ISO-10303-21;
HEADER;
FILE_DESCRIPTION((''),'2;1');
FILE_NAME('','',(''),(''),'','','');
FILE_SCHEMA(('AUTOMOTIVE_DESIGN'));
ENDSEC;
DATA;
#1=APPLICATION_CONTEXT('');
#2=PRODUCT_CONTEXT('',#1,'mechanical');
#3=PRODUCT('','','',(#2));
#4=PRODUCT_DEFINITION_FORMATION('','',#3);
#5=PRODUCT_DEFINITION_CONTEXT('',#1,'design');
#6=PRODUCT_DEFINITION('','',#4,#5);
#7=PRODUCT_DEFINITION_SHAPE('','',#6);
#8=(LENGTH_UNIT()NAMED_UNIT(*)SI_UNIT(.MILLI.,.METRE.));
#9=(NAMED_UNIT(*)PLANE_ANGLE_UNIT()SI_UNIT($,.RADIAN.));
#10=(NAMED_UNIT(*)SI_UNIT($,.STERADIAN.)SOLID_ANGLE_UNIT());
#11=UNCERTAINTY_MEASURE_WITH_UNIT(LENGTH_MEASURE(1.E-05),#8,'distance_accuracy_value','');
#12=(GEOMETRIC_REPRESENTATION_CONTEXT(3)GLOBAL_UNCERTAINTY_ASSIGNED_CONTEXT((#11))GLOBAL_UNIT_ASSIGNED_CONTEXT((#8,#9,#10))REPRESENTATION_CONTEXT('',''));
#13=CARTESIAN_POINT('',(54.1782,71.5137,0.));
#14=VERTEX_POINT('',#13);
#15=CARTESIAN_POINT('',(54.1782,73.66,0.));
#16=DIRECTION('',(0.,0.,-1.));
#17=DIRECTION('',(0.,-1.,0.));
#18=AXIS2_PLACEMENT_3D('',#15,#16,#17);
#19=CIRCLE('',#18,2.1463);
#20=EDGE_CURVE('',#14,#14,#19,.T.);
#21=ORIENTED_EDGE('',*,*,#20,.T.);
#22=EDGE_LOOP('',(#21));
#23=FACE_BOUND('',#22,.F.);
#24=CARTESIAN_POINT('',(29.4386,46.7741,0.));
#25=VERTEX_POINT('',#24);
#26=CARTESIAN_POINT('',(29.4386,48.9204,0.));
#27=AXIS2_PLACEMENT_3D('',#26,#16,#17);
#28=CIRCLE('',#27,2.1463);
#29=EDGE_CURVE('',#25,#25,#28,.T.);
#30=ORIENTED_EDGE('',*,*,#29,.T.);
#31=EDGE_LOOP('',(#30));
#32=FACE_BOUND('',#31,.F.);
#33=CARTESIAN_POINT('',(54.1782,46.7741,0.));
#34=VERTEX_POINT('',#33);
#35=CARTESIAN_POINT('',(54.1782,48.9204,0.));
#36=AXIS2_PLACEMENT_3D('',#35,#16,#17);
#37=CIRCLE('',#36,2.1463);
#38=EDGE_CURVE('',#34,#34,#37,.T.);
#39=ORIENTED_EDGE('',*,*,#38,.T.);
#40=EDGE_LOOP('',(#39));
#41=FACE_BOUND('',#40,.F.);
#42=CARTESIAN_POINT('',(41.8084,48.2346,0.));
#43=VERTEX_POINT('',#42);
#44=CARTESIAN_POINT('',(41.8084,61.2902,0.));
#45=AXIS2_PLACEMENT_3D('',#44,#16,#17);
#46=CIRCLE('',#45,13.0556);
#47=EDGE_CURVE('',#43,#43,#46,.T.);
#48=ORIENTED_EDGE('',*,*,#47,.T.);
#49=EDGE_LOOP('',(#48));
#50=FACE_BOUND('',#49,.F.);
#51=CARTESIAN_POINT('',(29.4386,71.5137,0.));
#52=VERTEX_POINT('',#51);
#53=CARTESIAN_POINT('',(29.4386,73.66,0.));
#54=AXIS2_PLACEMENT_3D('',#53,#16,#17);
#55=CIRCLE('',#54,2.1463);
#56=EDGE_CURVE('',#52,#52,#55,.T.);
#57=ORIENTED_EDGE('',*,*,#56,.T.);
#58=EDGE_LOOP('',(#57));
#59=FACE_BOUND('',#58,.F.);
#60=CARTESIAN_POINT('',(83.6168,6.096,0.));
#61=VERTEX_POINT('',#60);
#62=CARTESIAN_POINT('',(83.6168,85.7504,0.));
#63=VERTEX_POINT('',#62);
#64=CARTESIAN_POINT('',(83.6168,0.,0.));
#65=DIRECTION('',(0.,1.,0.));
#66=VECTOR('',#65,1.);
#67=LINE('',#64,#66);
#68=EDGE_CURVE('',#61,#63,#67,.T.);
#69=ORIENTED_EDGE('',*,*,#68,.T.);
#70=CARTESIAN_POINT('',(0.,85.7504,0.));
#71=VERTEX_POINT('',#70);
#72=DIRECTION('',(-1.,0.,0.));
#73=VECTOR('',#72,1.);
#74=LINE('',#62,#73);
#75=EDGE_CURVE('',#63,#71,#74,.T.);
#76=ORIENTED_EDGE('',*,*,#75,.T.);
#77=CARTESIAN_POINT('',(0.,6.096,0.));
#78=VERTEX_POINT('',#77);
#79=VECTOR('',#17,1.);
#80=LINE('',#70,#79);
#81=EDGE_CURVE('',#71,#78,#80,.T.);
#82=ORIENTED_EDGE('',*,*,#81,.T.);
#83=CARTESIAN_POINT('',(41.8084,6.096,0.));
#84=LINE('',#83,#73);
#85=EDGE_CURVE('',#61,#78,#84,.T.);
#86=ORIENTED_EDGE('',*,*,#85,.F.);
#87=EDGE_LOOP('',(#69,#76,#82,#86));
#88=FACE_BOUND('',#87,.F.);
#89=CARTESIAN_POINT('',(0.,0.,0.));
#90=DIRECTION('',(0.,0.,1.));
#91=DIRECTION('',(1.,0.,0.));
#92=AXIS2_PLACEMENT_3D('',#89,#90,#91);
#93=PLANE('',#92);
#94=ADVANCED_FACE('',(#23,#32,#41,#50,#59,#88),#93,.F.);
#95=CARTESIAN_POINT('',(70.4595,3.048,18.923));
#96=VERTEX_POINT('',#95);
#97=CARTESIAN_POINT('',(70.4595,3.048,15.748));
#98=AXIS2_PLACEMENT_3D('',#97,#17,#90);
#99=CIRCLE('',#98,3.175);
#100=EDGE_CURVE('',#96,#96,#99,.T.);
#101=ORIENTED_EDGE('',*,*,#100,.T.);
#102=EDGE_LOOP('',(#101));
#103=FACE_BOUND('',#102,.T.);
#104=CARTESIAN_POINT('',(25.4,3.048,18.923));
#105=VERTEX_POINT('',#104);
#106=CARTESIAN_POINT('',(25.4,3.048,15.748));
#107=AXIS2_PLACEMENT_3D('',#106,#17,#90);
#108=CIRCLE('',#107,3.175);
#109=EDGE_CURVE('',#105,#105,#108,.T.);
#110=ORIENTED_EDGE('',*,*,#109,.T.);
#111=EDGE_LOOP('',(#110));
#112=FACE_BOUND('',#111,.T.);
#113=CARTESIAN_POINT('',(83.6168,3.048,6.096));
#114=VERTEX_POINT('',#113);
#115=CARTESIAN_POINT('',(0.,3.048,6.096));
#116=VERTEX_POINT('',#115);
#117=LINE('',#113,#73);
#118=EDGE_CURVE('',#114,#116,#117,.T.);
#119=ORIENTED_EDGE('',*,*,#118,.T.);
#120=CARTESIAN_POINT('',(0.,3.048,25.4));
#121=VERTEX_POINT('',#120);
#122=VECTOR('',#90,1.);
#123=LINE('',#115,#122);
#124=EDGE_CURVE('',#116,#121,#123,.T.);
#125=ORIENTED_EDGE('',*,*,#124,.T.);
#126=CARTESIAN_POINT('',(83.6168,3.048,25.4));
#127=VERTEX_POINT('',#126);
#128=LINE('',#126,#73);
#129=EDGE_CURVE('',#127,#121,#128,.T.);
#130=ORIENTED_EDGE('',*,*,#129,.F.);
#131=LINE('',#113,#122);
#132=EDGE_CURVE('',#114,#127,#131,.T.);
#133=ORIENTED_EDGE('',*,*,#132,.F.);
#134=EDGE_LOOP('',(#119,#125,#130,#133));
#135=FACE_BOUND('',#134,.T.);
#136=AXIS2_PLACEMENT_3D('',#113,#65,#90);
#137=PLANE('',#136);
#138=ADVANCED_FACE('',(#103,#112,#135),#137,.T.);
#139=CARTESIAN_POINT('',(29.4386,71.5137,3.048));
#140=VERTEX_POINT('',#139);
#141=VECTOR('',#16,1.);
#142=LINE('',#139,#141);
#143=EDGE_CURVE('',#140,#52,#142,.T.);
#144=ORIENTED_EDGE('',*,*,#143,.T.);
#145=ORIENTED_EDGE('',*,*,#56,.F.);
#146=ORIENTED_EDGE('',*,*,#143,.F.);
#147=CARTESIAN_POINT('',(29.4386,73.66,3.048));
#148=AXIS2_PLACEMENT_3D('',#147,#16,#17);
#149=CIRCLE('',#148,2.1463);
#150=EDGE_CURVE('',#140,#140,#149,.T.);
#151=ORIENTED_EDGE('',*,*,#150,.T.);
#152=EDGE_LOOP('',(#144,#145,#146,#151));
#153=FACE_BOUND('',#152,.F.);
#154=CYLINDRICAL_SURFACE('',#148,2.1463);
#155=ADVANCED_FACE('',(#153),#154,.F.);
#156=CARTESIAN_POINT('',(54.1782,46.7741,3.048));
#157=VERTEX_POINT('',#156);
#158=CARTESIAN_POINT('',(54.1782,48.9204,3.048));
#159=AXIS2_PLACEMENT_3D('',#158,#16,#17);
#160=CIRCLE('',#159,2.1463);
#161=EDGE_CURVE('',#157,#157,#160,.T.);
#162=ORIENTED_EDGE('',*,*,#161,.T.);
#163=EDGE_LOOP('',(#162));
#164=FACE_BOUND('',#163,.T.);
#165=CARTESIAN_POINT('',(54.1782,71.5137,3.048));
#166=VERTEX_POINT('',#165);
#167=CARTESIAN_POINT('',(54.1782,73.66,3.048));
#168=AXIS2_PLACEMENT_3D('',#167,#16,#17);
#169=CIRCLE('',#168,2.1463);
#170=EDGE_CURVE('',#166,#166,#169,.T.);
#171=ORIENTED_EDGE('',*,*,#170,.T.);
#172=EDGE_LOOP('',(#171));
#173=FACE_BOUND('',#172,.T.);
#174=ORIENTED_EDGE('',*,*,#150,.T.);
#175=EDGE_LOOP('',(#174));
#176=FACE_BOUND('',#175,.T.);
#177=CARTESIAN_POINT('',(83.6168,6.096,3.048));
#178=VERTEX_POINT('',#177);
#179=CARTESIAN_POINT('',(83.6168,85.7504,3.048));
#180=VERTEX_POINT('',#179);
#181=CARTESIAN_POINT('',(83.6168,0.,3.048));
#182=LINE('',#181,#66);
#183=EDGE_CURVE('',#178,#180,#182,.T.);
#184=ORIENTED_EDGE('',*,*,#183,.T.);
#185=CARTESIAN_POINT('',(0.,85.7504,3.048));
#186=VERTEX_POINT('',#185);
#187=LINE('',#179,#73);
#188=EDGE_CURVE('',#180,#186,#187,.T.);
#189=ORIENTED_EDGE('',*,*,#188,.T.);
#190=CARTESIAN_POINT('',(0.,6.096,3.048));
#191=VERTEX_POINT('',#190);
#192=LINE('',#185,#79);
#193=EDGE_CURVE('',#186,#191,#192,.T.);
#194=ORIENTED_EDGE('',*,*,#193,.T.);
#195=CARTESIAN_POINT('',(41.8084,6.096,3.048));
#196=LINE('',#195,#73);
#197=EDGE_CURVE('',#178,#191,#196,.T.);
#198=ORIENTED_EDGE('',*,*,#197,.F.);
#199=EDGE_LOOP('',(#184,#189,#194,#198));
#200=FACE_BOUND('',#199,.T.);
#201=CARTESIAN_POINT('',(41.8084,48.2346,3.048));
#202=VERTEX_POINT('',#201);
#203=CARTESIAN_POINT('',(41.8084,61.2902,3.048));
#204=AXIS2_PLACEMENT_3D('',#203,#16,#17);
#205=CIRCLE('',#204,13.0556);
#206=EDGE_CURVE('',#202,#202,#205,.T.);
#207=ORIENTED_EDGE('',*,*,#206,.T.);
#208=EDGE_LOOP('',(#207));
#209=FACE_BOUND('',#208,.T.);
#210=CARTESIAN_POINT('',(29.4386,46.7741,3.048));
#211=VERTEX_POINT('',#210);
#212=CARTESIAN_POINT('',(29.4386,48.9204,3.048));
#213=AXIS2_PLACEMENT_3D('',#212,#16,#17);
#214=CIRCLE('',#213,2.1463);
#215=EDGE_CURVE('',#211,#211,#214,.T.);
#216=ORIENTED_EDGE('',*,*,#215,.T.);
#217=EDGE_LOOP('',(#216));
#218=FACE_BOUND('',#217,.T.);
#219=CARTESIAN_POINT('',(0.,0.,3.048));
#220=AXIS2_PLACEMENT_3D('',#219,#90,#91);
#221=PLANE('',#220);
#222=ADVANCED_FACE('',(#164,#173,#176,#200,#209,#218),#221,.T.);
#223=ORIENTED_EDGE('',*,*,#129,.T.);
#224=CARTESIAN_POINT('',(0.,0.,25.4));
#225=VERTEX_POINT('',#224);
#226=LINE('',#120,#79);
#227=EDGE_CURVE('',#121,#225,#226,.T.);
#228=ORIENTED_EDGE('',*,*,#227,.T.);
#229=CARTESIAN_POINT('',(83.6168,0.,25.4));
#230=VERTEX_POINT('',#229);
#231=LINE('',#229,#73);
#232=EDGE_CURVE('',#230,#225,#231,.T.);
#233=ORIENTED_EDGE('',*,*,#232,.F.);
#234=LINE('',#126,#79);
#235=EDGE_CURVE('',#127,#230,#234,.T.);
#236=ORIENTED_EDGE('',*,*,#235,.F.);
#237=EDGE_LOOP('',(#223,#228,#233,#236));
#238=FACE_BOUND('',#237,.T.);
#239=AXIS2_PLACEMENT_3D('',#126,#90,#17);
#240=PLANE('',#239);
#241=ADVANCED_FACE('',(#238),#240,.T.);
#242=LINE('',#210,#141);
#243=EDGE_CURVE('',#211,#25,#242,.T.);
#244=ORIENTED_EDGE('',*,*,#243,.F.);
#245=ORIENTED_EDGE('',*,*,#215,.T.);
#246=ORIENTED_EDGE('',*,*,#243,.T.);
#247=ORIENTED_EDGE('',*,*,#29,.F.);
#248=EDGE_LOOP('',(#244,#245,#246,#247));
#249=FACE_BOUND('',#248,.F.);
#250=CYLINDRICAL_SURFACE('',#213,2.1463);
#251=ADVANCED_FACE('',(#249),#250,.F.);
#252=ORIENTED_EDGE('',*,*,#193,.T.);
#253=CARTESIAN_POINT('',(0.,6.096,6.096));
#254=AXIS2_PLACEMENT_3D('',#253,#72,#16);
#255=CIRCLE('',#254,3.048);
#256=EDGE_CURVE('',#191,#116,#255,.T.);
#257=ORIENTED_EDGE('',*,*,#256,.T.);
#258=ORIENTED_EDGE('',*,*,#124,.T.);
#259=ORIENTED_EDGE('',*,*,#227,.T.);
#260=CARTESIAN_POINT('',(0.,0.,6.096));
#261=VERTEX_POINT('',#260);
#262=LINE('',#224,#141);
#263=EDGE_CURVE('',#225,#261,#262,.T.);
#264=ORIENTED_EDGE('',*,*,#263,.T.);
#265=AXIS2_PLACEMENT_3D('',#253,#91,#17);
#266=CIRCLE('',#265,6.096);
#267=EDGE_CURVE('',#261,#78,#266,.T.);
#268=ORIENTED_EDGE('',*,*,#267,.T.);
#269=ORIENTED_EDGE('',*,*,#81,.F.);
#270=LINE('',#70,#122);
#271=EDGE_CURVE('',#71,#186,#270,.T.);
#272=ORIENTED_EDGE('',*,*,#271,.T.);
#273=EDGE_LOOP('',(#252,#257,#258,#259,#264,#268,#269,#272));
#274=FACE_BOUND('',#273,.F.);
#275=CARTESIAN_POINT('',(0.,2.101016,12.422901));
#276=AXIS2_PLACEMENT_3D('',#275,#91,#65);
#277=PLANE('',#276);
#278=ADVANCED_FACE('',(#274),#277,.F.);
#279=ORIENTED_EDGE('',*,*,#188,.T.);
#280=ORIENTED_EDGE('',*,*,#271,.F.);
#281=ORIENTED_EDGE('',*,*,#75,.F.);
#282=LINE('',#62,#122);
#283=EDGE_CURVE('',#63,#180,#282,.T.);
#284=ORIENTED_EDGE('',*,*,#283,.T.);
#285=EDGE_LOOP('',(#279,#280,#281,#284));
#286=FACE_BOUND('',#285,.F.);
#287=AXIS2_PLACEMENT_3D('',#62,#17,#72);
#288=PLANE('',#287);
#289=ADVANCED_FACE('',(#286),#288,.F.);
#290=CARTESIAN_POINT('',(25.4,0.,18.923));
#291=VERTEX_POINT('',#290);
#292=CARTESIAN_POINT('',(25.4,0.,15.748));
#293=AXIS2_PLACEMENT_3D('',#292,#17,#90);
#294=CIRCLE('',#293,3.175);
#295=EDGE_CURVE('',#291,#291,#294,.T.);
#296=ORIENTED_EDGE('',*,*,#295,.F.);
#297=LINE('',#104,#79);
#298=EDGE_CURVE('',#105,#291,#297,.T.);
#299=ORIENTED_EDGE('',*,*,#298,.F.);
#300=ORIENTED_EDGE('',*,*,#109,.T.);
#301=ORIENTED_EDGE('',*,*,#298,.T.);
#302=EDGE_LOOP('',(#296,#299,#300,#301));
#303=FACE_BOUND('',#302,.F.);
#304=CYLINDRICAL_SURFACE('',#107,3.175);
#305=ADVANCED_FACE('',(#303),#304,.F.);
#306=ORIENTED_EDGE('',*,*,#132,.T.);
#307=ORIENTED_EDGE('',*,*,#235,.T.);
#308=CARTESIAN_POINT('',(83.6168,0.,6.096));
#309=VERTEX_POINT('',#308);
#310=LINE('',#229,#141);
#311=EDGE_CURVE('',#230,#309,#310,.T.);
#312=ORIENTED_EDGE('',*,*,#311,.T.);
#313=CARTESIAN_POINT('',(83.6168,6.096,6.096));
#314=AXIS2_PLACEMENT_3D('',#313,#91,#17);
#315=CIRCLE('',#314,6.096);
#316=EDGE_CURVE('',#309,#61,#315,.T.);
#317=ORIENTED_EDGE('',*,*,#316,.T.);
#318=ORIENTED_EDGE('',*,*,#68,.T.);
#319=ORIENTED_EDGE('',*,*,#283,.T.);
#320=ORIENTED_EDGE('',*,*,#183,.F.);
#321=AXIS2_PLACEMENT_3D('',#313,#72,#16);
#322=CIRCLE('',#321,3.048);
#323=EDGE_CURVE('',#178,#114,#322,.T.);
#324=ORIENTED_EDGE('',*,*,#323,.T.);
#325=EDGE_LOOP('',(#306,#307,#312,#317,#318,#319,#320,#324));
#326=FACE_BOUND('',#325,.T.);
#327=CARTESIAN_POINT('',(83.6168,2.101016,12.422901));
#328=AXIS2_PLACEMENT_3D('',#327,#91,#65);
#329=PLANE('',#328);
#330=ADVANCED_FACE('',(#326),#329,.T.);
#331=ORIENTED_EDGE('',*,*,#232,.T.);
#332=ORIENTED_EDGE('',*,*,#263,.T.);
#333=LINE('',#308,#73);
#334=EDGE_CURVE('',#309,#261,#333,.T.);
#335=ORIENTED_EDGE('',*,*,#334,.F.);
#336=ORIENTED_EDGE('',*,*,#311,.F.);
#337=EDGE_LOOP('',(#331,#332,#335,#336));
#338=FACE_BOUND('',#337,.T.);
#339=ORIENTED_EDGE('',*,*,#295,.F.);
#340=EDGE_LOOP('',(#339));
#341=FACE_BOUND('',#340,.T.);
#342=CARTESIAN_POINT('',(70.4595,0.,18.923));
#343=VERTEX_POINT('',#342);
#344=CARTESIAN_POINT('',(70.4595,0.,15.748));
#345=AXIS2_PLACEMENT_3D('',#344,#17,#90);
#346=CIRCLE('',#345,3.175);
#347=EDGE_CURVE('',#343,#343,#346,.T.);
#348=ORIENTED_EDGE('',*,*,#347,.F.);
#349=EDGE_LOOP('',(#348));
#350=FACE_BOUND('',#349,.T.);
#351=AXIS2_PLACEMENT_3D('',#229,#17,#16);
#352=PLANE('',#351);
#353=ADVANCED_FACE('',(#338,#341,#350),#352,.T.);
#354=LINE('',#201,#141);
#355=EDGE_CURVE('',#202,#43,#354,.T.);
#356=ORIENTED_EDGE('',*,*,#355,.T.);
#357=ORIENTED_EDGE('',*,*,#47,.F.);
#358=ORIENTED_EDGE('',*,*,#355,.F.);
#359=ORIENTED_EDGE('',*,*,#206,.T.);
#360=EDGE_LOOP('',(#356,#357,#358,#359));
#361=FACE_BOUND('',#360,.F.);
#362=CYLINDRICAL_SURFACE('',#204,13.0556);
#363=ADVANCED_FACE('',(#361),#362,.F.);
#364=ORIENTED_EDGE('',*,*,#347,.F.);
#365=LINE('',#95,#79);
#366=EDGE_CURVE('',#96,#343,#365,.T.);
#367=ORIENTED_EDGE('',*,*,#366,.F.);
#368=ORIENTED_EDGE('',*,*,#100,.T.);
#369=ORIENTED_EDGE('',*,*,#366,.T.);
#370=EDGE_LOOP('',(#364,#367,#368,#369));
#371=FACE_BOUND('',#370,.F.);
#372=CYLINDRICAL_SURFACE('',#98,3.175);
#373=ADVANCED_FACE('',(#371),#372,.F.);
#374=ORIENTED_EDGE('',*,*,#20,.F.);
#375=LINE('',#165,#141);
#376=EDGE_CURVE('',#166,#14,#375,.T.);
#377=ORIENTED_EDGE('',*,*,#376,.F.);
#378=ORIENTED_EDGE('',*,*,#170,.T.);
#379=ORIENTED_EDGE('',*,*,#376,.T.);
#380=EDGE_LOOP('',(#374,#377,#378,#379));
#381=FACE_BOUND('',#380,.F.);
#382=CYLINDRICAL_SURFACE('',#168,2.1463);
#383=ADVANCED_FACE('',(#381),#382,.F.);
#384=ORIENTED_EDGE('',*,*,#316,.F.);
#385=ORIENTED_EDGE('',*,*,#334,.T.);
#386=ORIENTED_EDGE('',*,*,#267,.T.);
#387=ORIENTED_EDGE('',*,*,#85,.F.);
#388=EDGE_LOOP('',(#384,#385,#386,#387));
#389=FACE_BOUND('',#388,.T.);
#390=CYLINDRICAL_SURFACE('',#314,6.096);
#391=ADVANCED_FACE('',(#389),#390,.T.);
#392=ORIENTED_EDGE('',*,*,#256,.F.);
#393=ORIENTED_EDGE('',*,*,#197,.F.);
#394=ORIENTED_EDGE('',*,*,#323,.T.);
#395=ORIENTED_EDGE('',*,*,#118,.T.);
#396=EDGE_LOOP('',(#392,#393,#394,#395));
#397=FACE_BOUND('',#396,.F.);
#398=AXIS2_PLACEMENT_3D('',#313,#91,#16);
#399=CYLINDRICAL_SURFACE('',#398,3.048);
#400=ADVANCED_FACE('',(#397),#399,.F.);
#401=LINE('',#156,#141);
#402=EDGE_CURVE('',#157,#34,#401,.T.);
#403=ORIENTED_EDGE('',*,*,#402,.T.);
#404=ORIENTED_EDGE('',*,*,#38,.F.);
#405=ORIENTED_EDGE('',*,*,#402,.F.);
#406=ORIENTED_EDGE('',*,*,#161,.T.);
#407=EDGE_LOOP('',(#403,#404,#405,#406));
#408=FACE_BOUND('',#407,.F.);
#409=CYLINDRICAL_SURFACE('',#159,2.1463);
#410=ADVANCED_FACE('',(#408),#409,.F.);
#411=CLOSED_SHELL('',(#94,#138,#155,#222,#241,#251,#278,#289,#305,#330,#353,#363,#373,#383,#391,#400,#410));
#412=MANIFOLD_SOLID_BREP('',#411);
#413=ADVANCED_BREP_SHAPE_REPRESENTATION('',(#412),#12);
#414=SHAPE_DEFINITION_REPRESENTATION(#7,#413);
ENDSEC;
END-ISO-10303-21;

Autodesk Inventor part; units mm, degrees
ref_plane "YZ Plane" through (0, 0, 0) normal (1, 0, 0) x (0, 1, 0)
ref_plane "XZ Plane" through (0, 0, 0) normal (0, 1, 0) x (-1, 0, 0)
ref_plane "XY Plane" through (0, 0, 0) normal (0, 0, 1) x (1, 0, 0)
sketch "Sketch1" plane through (0, 0, 0) normal (0, 0, 1) x (1, 0, 0)
  line L0 (0, 0) -> (83.6168, 0)
  line L1 (83.6168, 0) -> (83.6168, 85.7504)
  line L2 (83.6168, 85.7504) -> (0, 85.7504)
  line L3 (0, 85.7504) -> (0, 0)
  dimension "d0" = 83.6168
  dimension "d1" = 85.7504
extrude "Plate1" add sketch "Sketch1" along normal blind 3.048
sketch "Sketch2" plane through (83.6168, 3.048, 0) normal (0, -1, 0) x (1, 0, 0)
  line L0 (-83.6168, 0) -> (0, 0)
  line L1 (0, 0) -> (0, 25.4)
  line L2 (0, 25.4) -> (-83.6168, 25.4)
  line L3 (-83.6168, 25.4) -> (-83.6168, 0)
edge flange "Flange1" height 25.4 angle 90 thickness 3.048 bend radius 3.048 thickness toward (0, -1, 0) relief tear relief width 3.048 relief depth 1.524 edges at (41.8084, 0, 3.048) wall of the first edge with corners at (0, 3.048, 0) (83.6168, 3.048, 0) (83.6168, 3.048, 25.4) (0, 3.048, 25.4)
bend "Bend1"
corner "Corner1"
sketch "Sketch3" plane through (0, 0, 3.048) normal (0, 0, 1) x (1, 0, 0)
  line L0 (83.6168, 85.7504) -> (83.6168, 6.096) projected
  line L1 (0, 0) -> (83.6168, 0) projected
  point P0 (41.8084, 61.2902)
  dimension "d13" = 61.2902
  dimension "d14" = 41.8084
hole "Hole1" at (41.8084, 61.2902, 3.048) direction (0, 0, -1) diameter 26.1112 depth 3.048 tip angle 118
sketch "Sketch4" plane through (0, 0, 3.048) normal (0, 0, 1) x (1, 0, 0)
  circle A0 centre (41.8084, 61.2902) radius 13.0556 projected
  point P0 (0, 0)
  point P1 (29.4386, 73.66)
  point P2 (54.1782, 73.66)
  point P3 (54.1782, 48.9204)
  point P4 (29.4386, 48.9204)
  dimension "d23" = 12.3698
  dimension "d24" = 12.3698
  dimension "d25" = 12.3698
  dimension "d26" = 12.3698
  dimension "d27" = 12.3698
  dimension "d28" = 12.3698
  dimension "d29" = 12.3698
  dimension "d30" = 12.3698
hole "Hole2" at (29.4386, 73.66, 3.048) at (54.1782, 73.66, 3.048) at (54.1782, 48.9204, 3.048) at (29.4386, 48.9204, 3.048) direction (0, 0, -1) diameter 4.2926 depth 3.048 tip angle 118
sketch "Sketch5" plane through (0, 3.048, 25.4) normal (0, 1, 0) x (1, 0, 0)
  line L0 (0, 0) -> (0, 19.304) projected
  point P0 (0, 25.4)
  point P1 (25.4, 9.652)
  point P2 (70.4595, 9.652)
  dimension "d39" = 25.4
hole "Hole3" at (25.4, 3.048, 15.748) at (70.4595, 3.048, 15.748) direction (0, -1, 0) diameter 6.35 end through all
equation "\"d20\" = Thickness"
equation "\"d36\" = Thickness"
equation "\"d45\" = Thickness"
equation "\"d3\" = BendReliefWidth"
equation "\"d4\" = BendReliefDepth"
equation "\"d5\" = MinimumRemnant"
equation "\"d6\" = BendRadius"
equation "\"d9\" = BendRadius"
equation "\"d10\" = CornerReliefSize"
equation "\"d11\" = GapSize"
equation "\"d12\" = JacobiRadiusSize"
equation "\"BendRadius\" = Thickness"
equation "\"BendReliefWidth\" = Thickness"
equation "\"BendReliefDepth\" = 0.5 * Thickness"
equation "\"CornerReliefSize\" = 4 * Thickness"
equation "\"MinimumRemnant\" = 2 * Thickness"
equation "\"TransitionRadius\" = BendRadius"
equation "\"JacobiRadiusSize\" = BendRadius"
equation "\"GapSize\" = Thickness"
equation "\"d2\" = BendRadius"
equation "\"Thickness\" = 3.048"
